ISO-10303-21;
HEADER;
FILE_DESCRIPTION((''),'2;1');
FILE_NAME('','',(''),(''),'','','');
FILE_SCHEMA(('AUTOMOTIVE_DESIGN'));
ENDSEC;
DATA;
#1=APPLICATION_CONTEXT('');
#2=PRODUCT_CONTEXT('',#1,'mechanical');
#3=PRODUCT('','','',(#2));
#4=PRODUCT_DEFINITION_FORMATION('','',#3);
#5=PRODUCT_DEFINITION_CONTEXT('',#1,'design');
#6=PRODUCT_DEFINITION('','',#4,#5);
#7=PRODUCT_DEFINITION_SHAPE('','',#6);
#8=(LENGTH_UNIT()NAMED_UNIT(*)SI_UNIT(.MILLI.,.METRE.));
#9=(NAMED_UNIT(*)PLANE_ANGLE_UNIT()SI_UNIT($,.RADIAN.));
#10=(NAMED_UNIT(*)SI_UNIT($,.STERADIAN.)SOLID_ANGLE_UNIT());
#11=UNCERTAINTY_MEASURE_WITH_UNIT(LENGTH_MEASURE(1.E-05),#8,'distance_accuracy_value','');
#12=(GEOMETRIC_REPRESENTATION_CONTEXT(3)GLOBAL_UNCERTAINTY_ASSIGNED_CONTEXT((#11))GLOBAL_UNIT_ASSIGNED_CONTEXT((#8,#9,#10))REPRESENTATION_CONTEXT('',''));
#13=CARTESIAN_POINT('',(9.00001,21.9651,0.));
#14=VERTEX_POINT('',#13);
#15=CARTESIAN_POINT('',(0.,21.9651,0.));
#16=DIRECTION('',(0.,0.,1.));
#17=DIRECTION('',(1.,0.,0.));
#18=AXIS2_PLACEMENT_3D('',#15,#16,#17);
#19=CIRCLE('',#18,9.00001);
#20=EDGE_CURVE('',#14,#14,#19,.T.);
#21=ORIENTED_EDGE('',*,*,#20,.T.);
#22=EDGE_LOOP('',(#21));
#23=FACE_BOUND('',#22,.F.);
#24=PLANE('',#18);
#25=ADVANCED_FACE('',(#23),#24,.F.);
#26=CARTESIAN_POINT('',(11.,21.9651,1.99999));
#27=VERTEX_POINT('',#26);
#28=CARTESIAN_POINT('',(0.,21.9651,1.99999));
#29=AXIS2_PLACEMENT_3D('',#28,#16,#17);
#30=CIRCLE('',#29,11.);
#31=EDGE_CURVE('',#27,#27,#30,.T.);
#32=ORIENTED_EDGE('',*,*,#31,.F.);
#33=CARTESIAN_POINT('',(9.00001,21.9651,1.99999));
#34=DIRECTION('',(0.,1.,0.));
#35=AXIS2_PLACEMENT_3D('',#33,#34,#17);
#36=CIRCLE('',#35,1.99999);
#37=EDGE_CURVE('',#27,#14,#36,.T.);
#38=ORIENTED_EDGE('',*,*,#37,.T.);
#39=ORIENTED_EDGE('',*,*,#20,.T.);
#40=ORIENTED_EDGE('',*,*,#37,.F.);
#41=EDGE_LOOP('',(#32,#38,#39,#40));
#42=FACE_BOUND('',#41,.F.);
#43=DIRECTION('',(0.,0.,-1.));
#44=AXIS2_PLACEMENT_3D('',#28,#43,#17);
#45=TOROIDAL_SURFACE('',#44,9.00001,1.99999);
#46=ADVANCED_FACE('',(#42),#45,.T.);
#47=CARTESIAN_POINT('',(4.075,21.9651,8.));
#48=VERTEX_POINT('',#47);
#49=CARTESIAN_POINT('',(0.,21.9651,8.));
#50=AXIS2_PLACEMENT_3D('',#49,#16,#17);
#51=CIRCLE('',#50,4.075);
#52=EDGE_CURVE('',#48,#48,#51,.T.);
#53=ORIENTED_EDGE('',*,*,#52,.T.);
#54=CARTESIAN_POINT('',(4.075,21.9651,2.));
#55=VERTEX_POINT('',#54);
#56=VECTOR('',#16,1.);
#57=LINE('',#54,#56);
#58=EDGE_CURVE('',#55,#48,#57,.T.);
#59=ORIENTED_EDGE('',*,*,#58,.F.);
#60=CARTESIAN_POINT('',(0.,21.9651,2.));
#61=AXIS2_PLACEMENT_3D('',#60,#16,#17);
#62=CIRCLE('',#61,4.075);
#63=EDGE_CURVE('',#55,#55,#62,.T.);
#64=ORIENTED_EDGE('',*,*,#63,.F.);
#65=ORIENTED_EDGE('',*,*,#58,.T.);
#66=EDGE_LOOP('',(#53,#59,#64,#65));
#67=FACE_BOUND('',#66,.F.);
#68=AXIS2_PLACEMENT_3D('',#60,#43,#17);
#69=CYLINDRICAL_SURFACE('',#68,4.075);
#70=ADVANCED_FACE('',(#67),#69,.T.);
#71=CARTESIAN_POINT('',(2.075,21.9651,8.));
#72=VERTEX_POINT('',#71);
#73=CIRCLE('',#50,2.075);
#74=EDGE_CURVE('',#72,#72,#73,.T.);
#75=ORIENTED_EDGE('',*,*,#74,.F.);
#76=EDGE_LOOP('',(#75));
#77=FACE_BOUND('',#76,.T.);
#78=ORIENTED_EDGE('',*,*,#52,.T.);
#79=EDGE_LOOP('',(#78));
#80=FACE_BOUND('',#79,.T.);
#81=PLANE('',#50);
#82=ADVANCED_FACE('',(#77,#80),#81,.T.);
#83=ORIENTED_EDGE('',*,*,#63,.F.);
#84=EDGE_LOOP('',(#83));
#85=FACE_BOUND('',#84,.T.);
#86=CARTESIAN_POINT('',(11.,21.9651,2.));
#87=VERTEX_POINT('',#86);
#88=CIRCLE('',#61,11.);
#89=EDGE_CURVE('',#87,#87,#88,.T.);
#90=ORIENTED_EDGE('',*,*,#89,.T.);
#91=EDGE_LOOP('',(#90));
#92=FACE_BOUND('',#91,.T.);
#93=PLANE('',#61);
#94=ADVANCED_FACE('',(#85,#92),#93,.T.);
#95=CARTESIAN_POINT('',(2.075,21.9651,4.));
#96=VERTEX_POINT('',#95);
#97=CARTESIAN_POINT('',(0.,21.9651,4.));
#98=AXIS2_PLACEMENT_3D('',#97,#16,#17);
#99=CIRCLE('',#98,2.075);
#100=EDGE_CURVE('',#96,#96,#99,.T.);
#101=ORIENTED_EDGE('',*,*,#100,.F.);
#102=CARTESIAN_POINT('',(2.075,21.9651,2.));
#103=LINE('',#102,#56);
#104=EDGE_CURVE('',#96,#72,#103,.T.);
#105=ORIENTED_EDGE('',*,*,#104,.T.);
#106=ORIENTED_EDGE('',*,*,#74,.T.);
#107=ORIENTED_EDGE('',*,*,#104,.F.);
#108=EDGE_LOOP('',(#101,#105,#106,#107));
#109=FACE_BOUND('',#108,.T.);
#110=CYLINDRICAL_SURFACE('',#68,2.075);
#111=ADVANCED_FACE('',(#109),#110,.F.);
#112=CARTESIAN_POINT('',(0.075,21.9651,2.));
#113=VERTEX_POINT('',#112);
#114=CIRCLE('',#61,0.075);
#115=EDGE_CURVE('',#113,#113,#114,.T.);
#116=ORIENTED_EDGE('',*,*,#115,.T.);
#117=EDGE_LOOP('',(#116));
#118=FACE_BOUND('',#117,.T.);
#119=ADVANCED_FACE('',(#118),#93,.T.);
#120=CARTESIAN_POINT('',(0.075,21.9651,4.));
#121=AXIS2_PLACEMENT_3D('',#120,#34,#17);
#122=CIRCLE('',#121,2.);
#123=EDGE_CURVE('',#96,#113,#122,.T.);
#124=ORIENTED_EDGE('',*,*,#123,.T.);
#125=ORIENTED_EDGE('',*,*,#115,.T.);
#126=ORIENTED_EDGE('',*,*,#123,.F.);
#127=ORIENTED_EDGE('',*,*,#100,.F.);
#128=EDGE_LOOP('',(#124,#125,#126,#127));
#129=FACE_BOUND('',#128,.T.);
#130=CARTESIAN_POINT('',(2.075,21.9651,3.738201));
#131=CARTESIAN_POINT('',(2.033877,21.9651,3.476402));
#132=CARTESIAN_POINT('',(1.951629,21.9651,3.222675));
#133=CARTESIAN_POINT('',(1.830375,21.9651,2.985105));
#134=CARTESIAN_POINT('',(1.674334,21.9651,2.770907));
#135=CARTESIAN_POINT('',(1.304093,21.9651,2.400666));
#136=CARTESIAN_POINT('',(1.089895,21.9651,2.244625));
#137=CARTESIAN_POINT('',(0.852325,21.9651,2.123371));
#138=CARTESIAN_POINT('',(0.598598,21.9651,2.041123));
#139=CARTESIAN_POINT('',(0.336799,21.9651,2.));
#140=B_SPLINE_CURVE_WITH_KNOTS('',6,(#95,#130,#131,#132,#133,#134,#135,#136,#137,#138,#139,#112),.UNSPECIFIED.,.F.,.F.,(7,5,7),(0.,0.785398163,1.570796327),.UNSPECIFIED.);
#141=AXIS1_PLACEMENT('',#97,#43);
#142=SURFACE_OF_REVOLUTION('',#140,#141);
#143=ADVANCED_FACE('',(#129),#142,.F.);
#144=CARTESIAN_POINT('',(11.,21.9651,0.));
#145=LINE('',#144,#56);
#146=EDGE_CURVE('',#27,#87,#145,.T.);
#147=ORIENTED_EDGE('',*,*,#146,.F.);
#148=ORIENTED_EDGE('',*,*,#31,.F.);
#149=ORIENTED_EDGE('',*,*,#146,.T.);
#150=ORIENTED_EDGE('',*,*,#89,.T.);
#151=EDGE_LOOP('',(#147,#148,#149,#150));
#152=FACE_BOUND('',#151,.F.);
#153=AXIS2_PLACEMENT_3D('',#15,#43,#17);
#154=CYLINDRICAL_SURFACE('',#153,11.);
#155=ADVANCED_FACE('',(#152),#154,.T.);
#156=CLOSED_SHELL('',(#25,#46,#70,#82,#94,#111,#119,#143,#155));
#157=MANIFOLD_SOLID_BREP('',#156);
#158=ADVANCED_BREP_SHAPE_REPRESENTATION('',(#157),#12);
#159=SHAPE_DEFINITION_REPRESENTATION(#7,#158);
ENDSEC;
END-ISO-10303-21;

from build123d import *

# Parameters (mm, degrees)
F0_R     = 11
F1_DEPTH = 2
F3_R     = 4.075
F3_R_2   = 2.075
F4_DEPTH = 6
F5_R     = 1.99999
F6_R     = 2


# Not quite as in the source:
# - a fillet or chamfer is up to 0.001 mm smaller than in the source, because OpenCascade refuses the exact size
# - a feature names something its author has since deleted; it is built from what else it names


with BuildPart() as f1:
    # F0 (on Top) → F1 (new body)
    with BuildSketch(Plane.XY):
        with Locations((0, 21.965100023)):
            Circle(F0_R)
    extrude(amount=F1_DEPTH)

    # F3 (on face) → F4 (join)
    with BuildSketch(Plane.XY.offset(2)):
        with Locations((0, 21.965100023)):
            Circle(F3_R)
        with Locations((0, 21.965100023)):
            Circle(F3_R_2, mode=Mode.SUBTRACT)
    extrude(amount=F4_DEPTH)

    # F5 (radius 2 in the source; OpenCascade refuses exactly that, so slightly less here)
    f5_edges = [f1.edges().sort_by_distance(p)[0] for p in [
        (-11, 21.9651, 0),
    ]]
    fillet(f5_edges, radius=F5_R)

    # F6
    f6_edges = [f1.edges().sort_by_distance(p)[0] for p in [
        (-2.075, 21.9651, 2),
    ]]
    fillet(f6_edges, radius=F6_R)


solid = f1.part
